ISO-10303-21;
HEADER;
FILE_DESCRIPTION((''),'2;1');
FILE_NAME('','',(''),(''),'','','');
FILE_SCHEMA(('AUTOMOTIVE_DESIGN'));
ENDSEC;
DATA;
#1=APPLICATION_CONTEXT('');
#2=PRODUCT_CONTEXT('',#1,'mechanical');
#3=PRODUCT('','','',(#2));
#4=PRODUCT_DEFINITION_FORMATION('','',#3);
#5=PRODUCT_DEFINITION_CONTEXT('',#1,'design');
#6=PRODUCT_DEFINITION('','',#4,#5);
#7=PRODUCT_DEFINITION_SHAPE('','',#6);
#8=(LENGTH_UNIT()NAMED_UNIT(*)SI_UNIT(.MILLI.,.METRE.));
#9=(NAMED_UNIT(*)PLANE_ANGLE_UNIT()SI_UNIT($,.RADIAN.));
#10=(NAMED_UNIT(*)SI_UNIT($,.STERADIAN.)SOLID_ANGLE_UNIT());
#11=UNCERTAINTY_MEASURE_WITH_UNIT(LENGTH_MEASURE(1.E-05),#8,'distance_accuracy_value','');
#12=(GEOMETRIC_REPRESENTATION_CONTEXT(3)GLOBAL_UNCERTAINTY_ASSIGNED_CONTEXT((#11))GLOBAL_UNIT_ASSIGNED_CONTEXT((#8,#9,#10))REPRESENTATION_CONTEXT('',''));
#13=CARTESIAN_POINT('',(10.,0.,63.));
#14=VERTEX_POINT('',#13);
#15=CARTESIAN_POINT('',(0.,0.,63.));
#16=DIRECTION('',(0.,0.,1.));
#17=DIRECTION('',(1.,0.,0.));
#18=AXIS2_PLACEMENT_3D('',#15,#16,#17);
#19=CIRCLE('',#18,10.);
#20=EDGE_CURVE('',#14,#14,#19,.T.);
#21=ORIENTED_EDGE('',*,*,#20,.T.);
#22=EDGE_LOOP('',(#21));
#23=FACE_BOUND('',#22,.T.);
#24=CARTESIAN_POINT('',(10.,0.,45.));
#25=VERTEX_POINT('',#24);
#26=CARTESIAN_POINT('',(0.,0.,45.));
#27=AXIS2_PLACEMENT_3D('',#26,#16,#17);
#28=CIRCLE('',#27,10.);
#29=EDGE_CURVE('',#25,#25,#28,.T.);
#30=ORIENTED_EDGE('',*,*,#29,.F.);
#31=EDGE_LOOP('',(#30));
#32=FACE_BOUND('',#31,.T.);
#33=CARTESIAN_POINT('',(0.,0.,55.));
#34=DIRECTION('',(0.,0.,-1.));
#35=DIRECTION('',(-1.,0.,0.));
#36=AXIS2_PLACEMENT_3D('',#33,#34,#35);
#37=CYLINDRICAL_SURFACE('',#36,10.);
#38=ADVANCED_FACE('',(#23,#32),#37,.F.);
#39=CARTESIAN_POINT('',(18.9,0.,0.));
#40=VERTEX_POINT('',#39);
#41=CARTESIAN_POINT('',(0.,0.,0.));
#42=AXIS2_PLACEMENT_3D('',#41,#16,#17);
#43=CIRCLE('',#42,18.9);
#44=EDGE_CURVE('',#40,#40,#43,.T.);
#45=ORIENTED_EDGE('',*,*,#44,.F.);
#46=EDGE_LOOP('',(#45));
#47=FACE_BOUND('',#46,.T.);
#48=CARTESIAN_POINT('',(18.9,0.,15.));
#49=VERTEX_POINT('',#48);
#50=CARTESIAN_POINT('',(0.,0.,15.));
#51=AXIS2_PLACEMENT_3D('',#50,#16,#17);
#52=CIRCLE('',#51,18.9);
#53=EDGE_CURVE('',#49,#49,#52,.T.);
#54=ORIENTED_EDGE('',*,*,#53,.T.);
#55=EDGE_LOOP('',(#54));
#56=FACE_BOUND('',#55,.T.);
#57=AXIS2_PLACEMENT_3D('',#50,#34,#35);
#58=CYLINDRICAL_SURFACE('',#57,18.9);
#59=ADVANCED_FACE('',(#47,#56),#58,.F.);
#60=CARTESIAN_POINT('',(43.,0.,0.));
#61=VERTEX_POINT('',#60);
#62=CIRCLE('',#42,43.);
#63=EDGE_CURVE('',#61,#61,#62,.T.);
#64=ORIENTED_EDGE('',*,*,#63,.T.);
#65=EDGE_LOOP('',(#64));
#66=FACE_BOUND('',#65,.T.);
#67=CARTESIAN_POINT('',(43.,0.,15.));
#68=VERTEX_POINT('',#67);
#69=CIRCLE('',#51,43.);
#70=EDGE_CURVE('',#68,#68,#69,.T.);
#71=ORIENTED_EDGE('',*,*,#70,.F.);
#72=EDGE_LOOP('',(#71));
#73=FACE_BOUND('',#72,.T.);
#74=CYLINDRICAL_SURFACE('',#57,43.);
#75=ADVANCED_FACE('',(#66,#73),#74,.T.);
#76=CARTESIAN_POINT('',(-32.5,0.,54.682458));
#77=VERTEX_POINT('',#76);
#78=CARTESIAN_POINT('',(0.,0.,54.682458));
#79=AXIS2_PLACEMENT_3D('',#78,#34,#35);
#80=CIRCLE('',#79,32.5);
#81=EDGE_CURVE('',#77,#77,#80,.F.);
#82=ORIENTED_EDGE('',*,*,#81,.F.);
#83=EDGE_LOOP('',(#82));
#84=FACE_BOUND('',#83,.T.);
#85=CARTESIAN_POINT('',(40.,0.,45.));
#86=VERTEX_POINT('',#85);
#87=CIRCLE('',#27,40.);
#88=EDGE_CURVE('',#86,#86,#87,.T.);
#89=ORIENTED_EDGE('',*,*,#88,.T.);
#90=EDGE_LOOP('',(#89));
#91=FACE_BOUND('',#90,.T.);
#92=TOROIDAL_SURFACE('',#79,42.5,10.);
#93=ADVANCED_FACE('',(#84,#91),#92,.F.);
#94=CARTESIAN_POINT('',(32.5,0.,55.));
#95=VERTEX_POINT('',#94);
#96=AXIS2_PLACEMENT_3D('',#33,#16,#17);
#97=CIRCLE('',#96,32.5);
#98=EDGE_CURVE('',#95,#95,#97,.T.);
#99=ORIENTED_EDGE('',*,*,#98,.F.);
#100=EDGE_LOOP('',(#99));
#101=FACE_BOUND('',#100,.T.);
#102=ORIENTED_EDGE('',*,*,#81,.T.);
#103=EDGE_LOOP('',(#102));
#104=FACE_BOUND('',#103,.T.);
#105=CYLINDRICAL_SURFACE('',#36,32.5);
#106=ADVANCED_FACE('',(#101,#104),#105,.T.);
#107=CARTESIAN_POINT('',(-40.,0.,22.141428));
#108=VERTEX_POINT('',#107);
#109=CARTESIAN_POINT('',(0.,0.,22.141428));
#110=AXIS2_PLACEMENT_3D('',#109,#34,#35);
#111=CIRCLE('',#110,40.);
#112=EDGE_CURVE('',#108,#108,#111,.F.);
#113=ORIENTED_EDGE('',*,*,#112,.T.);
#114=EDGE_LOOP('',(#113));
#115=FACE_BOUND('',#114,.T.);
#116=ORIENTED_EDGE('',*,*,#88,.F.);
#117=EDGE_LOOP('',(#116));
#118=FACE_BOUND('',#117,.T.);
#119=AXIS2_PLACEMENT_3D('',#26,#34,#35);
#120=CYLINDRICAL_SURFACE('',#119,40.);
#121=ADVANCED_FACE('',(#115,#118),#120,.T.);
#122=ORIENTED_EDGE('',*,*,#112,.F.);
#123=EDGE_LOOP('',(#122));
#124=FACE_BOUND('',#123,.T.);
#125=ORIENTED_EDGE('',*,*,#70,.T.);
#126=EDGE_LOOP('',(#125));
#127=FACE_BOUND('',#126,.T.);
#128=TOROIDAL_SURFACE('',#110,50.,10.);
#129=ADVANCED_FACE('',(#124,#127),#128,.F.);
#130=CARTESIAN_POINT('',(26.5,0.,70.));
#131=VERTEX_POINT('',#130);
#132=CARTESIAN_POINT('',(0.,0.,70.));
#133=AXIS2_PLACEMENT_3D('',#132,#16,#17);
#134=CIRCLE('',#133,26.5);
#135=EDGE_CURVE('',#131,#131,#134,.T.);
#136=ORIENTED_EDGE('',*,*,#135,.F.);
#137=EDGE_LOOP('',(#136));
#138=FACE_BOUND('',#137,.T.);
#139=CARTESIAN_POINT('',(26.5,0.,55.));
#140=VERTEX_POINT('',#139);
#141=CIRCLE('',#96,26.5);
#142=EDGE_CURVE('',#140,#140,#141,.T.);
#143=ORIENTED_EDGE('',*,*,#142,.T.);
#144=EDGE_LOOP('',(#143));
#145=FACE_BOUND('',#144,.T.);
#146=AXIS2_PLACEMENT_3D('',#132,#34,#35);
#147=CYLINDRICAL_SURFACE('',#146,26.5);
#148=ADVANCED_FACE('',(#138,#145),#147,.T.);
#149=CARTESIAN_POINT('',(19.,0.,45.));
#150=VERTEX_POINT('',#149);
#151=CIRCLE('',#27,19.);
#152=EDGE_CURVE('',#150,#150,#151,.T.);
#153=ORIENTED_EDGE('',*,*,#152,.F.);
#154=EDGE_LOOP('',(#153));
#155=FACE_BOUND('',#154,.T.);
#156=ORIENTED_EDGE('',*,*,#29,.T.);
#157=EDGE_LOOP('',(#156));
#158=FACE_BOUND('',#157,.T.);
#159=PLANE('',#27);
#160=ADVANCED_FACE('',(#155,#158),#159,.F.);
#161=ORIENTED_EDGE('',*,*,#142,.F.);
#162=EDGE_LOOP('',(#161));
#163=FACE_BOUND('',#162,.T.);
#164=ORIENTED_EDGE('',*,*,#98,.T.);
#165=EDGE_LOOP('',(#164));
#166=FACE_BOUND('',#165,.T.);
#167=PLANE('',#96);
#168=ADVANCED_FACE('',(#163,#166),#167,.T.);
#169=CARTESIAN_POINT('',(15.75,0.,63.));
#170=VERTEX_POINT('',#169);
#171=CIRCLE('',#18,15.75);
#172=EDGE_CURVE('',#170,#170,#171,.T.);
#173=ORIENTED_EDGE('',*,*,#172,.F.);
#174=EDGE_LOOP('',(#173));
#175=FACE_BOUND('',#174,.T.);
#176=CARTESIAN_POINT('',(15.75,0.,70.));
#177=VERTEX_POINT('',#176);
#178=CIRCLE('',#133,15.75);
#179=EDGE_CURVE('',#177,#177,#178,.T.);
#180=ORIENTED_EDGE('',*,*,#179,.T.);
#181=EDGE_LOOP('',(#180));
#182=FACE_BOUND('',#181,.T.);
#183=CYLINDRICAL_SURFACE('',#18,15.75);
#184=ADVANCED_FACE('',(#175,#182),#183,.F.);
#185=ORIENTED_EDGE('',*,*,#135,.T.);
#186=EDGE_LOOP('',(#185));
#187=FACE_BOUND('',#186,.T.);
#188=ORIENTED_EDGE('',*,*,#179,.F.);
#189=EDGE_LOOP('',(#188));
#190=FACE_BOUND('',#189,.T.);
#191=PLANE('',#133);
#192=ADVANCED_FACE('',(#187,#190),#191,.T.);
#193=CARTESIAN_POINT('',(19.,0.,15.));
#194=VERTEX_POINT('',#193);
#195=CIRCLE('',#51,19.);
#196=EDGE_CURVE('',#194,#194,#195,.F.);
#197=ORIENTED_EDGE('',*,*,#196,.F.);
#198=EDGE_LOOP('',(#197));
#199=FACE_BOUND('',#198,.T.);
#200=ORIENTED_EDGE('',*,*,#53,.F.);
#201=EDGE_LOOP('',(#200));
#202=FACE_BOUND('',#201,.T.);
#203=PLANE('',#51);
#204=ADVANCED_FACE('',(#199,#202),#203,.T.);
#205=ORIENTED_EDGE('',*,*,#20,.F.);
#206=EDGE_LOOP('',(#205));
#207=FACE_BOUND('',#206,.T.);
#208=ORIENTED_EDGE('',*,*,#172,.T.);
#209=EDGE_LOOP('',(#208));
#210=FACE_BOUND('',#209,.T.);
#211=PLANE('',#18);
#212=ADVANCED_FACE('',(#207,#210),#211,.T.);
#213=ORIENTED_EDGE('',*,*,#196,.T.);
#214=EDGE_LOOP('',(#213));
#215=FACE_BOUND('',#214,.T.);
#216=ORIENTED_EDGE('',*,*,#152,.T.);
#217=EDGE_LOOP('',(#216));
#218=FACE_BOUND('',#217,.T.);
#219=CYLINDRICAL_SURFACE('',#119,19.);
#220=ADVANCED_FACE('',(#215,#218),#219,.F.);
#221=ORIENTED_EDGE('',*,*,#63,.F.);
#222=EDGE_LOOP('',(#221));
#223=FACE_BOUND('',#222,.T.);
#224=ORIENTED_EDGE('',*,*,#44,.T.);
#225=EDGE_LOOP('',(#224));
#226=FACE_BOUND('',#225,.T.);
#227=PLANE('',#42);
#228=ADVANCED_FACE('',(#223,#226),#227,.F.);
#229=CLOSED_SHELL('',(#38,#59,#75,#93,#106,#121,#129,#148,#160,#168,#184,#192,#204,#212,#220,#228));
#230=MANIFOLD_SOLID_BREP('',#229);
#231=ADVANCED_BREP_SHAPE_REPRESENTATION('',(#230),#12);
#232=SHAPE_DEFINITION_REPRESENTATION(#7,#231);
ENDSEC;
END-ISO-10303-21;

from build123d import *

# Parameters (mm, degrees)
SKETCH_1_R          = 43
SKETCH_1_R_2        = 18.9
EXTRUDE_1_DEPTH     = 15
SKETCH_3_R          = 40
SKETCH_3_R_2        = 19
EXTRUDE_2_DEPTH     = 30
SKETCH_7_R          = 32.5
SKETCH_7_R_2        = 10
EXTRUDE_3_DEPTH     = 10
FILLET_3_R          = 10
SKETCH_9_R          = 16
SKETCH_9_R_2        = 10
EXTRUDE_6_DEPTH     = 7
SKETCH_10_R         = 26.5
SKETCH_10_R_2       = 10
EXTRUDE_7_DEPTH     = 15
SKETCH_12_R         = 15.75
CUT_EXTRUDE_8_DEPTH = 7
FILLET_4_R          = 10


with BuildPart() as part:
    # Эскиз1 → Вытянуть1 (new body)
    with BuildSketch(Plane.XY):
        Circle(SKETCH_1_R)
        Circle(SKETCH_1_R_2, mode=Mode.SUBTRACT)
    extrude(amount=EXTRUDE_1_DEPTH)

    # Эскиз3 → Вытянуть2 (add)
    with BuildSketch(Plane.XY.offset(15)):
        Circle(SKETCH_3_R)
        Circle(SKETCH_3_R_2, mode=Mode.SUBTRACT)
    extrude(amount=EXTRUDE_2_DEPTH)

    # Эскиз7 → Вытянуть3 (add)
    with BuildSketch(Plane.XY.offset(45)):
        Circle(SKETCH_7_R)
        Circle(SKETCH_7_R_2, mode=Mode.SUBTRACT)
    extrude(amount=EXTRUDE_3_DEPTH)

    # Скругление3
    # the kernel refuses this fillet: 10 mm, written as the material it adds along each edge
    with BuildSketch(Plane(origin=(0, 0, 15), x_dir=(1, 0, 0), z_dir=(0, -1, 0))) as fillet_3_piece_1:
        with BuildLine():
            CenterArc((50, 7.141428429), FILLET_3_R, 180, 45.572995999)
            Line((40, 7.141428429), (39.8, 7.141428429))
            Line((39.8, 7.141428429), (39.8, 0))
            Line((39.8, 0), (40, -0.2))
            ThreePointArc((40, -0.2), (41.5, -0.2), (42.86, -0.142828569))
            Line((42.86, -0.142828569), (43, 0))
        make_face()
    revolve(axis=Axis((0, 0, 15), (0, 0, 1)))



with BuildPart() as body_2:
    # Эскиз9 → Вытянуть6 (new body)
    with BuildSketch(Plane.XY.offset(48)):
        Circle(SKETCH_9_R)
        Circle(SKETCH_9_R_2, mode=Mode.SUBTRACT)
    extrude(amount=EXTRUDE_6_DEPTH)


with BuildPart() as part_1:
    add(part.part)

    add(body_2.part)  # Вытянуть7 merges body 2
    # Эскиз10 → Вытянуть7 (add)
    with BuildSketch(Plane.XY.offset(55)):
        Circle(SKETCH_10_R)
        Circle(SKETCH_10_R_2, mode=Mode.SUBTRACT)
    extrude(amount=EXTRUDE_7_DEPTH)

    # Эскиз12 → Вытянуть8 (cut)
    with BuildSketch(Plane.XY.offset(70)):
        Circle(SKETCH_12_R)
    extrude(amount=-CUT_EXTRUDE_8_DEPTH, mode=Mode.SUBTRACT)

    # Скругление4
    # the kernel refuses this fillet: 10 mm, written as the material it adds along each edge
    with BuildSketch(Plane(origin=(0, 0, 45), x_dir=(1, 0, 0), z_dir=(0, -1, 0))) as fillet_4_piece_1:
        with BuildLine():
            CenterArc((42.5, 9.682458366), FILLET_4_R, 180, 75.522487814)
            Line((32.5, 9.682458366), (32.3, 9.682458366))
            Line((32.3, 9.682458366), (32.3, 0))
            Line((32.3, 0), (32.5, -0.2))
            ThreePointArc((32.5, -0.2), (36.25, -0.2), (39.95, -0.193649167))
            Line((39.95, -0.193649167), (40, 0))
        make_face()
    revolve(axis=Axis((0, 0, 45), (0, 0, 1)))


solid = part_1.part
